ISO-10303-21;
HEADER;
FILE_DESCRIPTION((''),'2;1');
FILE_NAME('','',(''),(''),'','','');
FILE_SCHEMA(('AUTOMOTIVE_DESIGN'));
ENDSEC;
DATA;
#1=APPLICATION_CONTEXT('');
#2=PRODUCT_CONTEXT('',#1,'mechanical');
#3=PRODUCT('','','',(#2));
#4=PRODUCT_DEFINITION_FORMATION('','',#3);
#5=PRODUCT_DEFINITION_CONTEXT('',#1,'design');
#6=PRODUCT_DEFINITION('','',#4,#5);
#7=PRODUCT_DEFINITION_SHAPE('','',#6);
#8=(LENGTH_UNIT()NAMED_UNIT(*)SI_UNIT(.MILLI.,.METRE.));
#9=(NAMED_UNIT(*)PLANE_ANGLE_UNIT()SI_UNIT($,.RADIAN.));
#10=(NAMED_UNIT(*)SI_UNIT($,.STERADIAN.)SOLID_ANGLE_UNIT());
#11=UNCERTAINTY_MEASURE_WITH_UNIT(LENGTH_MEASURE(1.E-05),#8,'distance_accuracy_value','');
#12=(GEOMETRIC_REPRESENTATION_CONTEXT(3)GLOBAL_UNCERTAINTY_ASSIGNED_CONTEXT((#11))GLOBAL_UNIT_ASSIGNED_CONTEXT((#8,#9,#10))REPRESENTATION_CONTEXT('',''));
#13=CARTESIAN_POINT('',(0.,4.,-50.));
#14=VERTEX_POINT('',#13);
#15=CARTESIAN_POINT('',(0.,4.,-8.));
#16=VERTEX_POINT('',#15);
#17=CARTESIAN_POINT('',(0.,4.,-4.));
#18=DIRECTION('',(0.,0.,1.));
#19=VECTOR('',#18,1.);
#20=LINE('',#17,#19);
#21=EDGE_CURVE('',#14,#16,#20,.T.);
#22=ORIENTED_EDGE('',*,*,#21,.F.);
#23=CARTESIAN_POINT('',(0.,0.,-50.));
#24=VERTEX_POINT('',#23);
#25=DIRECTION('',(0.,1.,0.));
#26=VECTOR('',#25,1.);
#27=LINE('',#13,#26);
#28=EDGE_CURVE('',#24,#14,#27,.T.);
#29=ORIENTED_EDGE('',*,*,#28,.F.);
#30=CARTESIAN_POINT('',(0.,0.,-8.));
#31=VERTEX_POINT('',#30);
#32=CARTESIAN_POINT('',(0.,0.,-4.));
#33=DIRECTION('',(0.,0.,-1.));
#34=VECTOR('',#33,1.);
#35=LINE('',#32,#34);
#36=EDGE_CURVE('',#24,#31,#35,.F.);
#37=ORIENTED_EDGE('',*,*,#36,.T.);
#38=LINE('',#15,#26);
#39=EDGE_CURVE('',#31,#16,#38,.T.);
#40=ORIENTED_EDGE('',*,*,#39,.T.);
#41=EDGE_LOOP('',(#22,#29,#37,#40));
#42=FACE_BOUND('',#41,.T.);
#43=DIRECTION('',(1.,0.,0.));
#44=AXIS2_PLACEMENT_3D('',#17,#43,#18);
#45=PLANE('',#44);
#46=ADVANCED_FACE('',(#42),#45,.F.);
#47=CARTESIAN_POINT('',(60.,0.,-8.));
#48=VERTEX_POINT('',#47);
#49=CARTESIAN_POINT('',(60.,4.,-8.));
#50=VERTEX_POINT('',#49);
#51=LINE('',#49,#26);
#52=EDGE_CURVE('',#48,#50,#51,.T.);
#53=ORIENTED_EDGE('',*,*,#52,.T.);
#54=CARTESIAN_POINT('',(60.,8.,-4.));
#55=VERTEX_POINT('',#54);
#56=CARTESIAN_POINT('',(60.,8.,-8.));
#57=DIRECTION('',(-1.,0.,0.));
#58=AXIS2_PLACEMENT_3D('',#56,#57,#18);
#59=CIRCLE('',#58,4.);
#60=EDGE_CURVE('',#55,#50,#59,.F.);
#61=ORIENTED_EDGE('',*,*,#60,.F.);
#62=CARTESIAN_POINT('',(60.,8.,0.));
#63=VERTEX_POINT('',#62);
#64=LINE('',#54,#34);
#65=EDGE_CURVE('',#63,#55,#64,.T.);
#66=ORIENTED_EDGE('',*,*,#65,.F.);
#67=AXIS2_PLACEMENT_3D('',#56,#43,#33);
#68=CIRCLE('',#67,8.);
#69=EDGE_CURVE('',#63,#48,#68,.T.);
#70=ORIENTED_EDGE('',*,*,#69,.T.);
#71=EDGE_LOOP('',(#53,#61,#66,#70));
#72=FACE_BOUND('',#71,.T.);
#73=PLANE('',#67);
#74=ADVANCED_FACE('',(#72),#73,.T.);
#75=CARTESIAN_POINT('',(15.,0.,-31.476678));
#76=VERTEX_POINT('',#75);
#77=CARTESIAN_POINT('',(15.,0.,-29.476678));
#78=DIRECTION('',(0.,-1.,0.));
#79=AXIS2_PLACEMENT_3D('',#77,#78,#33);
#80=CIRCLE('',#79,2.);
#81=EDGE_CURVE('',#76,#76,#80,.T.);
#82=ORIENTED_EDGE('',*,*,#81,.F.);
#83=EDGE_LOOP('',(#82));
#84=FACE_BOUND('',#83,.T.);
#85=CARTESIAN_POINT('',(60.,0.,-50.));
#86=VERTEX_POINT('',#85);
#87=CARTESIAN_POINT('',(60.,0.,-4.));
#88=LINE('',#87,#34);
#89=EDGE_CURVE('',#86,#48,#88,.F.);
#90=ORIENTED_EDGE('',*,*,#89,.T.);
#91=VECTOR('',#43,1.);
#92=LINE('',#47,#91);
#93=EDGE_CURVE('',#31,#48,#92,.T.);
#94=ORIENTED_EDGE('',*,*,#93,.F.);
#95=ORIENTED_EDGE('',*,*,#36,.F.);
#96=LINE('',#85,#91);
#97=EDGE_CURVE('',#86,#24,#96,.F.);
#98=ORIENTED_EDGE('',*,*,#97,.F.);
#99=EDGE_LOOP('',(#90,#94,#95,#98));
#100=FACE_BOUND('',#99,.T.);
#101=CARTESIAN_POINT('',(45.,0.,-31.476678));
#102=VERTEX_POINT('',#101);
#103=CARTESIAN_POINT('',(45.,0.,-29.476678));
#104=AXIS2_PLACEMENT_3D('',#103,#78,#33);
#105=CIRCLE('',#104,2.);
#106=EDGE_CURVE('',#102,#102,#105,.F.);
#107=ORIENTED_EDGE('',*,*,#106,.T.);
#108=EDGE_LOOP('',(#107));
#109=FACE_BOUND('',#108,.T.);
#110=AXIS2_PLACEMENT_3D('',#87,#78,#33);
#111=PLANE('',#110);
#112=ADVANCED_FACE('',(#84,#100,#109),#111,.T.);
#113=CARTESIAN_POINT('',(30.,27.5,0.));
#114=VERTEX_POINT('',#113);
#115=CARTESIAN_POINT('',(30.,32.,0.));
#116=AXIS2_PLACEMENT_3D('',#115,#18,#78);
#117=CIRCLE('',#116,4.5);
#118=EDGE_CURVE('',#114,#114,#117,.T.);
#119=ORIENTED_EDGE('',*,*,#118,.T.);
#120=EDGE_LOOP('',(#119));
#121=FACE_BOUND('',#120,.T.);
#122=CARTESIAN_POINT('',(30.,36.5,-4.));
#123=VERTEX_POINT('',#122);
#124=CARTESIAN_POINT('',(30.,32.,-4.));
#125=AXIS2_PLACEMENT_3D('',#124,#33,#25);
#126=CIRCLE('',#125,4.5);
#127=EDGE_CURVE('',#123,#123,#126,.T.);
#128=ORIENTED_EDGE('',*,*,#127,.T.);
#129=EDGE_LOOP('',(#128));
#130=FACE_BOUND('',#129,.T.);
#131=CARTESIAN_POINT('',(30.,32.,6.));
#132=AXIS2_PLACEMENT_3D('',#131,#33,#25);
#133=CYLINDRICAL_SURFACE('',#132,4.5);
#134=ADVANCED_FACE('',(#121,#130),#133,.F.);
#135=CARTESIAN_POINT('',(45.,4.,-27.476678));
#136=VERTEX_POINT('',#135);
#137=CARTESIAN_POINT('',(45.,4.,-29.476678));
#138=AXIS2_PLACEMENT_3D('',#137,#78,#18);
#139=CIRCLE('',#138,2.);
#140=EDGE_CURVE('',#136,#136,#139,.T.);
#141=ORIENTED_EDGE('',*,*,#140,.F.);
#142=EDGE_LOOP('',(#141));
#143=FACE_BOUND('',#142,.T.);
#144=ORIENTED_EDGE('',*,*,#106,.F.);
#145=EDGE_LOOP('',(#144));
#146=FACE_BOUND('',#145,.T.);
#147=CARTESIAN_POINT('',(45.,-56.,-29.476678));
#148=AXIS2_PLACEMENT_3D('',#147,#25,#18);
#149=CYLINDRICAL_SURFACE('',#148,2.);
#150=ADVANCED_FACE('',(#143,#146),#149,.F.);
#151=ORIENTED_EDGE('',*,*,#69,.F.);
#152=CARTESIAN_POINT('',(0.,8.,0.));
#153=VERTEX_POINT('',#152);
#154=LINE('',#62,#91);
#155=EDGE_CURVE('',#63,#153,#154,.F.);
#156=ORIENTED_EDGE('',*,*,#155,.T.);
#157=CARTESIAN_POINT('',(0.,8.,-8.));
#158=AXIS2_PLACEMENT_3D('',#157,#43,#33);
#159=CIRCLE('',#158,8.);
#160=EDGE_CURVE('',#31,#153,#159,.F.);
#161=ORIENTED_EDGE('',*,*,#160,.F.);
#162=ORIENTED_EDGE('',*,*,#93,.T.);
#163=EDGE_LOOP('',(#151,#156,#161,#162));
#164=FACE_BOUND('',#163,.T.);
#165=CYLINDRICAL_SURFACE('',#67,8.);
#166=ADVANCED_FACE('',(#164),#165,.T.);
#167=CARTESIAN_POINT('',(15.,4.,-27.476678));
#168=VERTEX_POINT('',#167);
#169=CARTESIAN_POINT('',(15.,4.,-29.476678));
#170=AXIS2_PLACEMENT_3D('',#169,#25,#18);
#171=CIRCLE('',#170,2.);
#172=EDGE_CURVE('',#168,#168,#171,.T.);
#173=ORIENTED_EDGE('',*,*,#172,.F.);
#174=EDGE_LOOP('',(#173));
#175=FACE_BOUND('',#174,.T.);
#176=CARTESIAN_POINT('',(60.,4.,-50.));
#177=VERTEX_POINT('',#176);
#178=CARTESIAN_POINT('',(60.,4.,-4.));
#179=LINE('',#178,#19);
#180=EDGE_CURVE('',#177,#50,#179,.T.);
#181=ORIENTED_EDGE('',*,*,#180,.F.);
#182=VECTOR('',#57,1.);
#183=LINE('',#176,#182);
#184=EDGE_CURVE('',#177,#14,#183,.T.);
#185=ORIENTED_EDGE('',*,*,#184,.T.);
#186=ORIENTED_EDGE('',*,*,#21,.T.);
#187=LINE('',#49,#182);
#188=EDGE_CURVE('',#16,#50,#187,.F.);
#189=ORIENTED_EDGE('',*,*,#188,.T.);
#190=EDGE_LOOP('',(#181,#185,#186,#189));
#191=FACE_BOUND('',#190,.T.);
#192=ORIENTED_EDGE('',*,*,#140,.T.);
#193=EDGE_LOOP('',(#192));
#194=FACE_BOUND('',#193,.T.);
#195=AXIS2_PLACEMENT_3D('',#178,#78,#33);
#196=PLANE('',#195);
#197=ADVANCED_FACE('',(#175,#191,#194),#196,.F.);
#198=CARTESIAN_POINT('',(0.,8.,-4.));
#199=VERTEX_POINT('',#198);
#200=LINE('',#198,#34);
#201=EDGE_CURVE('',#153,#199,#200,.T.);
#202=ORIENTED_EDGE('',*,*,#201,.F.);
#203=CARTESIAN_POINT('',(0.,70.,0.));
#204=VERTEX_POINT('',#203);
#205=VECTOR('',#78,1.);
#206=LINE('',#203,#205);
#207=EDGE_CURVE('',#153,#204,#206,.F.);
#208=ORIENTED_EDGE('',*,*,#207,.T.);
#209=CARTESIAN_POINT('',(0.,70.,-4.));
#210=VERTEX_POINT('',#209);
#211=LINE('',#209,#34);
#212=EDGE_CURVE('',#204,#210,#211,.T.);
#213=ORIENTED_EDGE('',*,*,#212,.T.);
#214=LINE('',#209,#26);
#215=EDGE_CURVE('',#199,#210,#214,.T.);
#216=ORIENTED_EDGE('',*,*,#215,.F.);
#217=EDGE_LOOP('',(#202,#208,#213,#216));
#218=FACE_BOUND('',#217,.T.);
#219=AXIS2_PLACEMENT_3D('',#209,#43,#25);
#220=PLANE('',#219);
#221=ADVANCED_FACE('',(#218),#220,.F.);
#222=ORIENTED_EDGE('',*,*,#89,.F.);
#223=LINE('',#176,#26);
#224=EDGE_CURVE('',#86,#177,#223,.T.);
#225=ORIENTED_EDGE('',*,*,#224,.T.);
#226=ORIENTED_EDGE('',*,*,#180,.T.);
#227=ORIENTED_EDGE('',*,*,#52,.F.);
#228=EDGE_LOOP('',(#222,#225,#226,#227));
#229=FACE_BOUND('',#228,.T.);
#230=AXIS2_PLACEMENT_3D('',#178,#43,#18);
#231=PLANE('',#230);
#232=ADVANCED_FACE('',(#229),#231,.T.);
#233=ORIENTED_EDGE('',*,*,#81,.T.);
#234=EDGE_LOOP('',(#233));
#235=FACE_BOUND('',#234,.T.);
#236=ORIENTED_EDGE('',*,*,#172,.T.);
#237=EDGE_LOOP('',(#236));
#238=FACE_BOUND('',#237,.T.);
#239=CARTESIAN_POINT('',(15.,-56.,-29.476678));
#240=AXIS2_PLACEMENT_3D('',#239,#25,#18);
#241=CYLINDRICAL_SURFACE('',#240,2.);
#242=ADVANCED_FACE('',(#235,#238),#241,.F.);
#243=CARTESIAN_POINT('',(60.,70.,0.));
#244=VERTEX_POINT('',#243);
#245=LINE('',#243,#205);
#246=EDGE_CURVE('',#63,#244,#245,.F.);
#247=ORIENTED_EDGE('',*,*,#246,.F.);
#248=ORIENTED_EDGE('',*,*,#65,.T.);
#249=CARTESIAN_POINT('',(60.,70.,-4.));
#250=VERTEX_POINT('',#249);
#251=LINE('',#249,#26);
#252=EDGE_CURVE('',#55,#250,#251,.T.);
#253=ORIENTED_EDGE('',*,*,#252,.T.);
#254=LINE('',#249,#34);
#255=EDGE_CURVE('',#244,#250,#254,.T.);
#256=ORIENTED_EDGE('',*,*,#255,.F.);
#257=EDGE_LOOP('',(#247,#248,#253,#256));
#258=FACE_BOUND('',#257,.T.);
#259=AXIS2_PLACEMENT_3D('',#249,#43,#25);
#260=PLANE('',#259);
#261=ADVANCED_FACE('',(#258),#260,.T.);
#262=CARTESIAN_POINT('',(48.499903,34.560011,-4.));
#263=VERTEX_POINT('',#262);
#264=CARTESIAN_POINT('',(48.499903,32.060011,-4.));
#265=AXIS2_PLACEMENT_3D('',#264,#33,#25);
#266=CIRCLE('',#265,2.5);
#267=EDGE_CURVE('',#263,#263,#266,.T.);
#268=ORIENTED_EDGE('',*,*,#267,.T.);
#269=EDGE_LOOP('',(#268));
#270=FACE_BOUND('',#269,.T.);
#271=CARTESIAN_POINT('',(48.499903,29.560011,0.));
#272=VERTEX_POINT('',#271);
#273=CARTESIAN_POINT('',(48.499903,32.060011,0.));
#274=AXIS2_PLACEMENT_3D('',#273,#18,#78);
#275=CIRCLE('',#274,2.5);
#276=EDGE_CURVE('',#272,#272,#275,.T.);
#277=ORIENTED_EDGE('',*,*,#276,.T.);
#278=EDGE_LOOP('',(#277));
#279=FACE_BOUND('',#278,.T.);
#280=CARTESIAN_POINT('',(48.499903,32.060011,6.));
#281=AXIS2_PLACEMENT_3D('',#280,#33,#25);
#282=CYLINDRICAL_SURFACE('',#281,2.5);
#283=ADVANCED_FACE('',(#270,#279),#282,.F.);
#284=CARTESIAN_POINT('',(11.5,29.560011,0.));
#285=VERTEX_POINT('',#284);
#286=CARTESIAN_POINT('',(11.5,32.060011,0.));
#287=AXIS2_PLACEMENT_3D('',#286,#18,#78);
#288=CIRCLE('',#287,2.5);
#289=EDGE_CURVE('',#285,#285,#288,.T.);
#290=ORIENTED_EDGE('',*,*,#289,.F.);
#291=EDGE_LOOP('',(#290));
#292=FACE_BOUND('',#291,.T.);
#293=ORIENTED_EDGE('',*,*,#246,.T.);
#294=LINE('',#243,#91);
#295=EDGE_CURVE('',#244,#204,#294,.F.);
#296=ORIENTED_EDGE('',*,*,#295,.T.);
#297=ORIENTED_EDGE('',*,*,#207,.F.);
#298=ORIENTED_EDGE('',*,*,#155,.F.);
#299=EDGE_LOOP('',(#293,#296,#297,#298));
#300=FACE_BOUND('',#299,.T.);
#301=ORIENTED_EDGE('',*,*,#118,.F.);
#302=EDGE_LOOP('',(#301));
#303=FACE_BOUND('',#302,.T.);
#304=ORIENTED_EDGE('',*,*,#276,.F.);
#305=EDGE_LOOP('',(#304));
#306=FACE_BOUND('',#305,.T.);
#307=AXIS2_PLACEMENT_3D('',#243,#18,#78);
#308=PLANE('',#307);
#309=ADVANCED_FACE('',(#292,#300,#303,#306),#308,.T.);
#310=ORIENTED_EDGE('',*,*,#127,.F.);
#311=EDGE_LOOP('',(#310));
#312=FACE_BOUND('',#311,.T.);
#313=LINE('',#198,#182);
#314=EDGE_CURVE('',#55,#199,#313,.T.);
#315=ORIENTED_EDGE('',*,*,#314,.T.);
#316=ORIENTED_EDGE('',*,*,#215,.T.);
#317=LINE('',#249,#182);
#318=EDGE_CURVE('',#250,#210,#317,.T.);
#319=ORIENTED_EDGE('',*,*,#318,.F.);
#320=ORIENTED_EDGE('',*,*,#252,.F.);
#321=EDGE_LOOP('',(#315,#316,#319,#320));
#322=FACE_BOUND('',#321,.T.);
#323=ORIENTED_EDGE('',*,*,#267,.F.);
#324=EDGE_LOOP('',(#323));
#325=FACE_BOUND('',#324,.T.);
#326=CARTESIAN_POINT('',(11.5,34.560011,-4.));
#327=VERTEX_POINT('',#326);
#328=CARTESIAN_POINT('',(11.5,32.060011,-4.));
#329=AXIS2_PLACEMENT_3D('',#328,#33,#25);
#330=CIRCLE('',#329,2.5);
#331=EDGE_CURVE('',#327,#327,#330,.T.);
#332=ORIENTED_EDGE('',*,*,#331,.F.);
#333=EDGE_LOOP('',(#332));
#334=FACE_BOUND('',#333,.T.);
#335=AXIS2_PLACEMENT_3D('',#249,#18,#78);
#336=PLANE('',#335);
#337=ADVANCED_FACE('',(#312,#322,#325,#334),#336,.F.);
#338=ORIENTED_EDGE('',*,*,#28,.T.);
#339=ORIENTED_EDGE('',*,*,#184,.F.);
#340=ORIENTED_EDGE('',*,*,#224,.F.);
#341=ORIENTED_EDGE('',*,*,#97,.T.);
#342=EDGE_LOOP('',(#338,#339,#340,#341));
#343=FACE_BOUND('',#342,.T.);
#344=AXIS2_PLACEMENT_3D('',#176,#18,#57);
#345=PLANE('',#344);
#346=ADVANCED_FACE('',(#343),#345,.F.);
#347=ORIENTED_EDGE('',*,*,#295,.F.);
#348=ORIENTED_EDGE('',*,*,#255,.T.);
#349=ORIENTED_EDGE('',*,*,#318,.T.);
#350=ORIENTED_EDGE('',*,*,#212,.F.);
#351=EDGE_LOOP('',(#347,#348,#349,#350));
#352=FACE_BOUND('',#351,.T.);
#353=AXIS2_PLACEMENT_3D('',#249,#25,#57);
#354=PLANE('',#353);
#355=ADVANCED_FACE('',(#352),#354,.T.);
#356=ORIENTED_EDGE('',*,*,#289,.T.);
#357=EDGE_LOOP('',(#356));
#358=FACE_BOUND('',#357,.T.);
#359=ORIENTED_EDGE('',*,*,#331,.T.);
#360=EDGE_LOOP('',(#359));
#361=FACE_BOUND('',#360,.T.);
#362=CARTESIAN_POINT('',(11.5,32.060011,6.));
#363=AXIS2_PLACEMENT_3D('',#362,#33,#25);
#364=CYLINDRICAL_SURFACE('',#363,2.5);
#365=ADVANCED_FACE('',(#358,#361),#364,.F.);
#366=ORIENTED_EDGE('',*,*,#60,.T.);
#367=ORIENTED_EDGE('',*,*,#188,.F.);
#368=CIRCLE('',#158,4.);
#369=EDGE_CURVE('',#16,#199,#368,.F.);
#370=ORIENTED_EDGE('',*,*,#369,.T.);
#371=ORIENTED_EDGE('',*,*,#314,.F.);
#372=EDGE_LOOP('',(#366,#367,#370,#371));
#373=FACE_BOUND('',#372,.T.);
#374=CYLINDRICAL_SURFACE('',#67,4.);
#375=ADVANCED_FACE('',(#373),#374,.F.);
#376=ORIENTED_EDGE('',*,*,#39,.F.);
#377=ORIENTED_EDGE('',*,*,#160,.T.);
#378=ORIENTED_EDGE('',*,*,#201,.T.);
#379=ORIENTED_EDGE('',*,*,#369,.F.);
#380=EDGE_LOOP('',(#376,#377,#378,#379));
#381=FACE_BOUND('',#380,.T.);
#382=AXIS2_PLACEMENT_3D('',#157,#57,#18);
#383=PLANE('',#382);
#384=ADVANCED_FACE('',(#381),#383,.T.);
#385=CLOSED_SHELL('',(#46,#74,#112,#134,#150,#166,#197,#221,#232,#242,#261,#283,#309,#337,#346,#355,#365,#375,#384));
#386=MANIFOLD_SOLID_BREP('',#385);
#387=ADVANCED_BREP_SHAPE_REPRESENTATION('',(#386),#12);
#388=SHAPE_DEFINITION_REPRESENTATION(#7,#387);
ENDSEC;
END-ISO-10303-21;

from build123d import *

# Parameters (mm, degrees)
BOSS_EXTRUDE1_DEPTH    = 60
CONVERT_SOLID1_DEPTH   = 60
CONVERT_SOLID1_2_DEPTH = 60
SKETCH7_R              = 2
CUT_EXTRUDE2_DEPTH     = 60
SKETCH10_R             = 4.5
CUT_EXTRUDE3_DEPTH     = 10
SKETCH12_R             = 2.5
CUT_EXTRUDE4_DEPTH     = 10


# Read off the part's stored shape, not the designer's step: Convert-Solid1
with BuildPart() as part:
    # Sketch2 → Boss-Extrude1 (new body)
    with BuildSketch(Plane(origin=(0, 0, 0), x_dir=(0, 0, -1), z_dir=(1, 0, 0))):
        Polygon((0, 70), (0, 0), (50, 0), (50, 4), (4, 4), (4, 70), align=None)
    extrude(amount=BOSS_EXTRUDE1_DEPTH)

    # Convert-Solid1 outline → Convert-Solid1 (cut)
    with BuildSketch(Plane.YZ):
        with BuildLine():
            ThreePointArc((0, -8), (2.343145751, -2.343145751), (8, 0))
            Line((8, 0), (0, 0))
            Line((0, 0), (0, -8))
        make_face()
    extrude(amount=CONVERT_SOLID1_DEPTH, mode=Mode.SUBTRACT)

    # Convert-Solid1 2 outline → Convert-Solid1 2 (add)
    with BuildSketch(Plane.YZ):
        with BuildLine():
            ThreePointArc((4, -8), (5.171572875, -5.171572875), (8, -4))
            Line((8, -4), (4, -4))
            Line((4, -4), (4, -8))
        make_face()
    extrude(amount=CONVERT_SOLID1_2_DEPTH)

    # Sketch7 → Cut-Extrude2 (cut)
    with BuildSketch(Plane(origin=(0, 4, 0), x_dir=(1, 0, 0), z_dir=(0, 1, 0))):
        with Locations(Location((15, 29.476677551, 0), (0, 0, 270))):
            Circle(SKETCH7_R)
    cut_extrude2 = extrude(amount=-CUT_EXTRUDE2_DEPTH, mode=Mode.SUBTRACT)

    # Mirror1: Cut-Extrude2 across plane
    add(cut_extrude2.mirror(Plane.ZY.offset(-30)), mode=Mode.SUBTRACT)

    # Sketch10 → Cut-Extrude3 (cut)
    with BuildSketch(Plane(origin=(0, 0, -4), x_dir=(-1, 0, 0), z_dir=(0, 0, -1))):
        with Locations(Location((-30, 32, 0), (0, 0, 90))):
            Circle(SKETCH10_R)
    extrude(amount=-CUT_EXTRUDE3_DEPTH, mode=Mode.SUBTRACT)

    # Sketch12 → Cut-Extrude4 (cut)
    with BuildSketch(Plane(origin=(0, 0, -4), x_dir=(-1, 0, 0), z_dir=(0, 0, -1))):
        with Locations(Location((-48.499902666, 32.060011256, 0), (0, 0, 90))):
            Circle(SKETCH12_R)
        with Locations(Location((-11.5, 32.060011256, 0), (0, 0, 90))):
            Circle(SKETCH12_R)
    extrude(amount=-CUT_EXTRUDE4_DEPTH, mode=Mode.SUBTRACT)


solid = part.part
